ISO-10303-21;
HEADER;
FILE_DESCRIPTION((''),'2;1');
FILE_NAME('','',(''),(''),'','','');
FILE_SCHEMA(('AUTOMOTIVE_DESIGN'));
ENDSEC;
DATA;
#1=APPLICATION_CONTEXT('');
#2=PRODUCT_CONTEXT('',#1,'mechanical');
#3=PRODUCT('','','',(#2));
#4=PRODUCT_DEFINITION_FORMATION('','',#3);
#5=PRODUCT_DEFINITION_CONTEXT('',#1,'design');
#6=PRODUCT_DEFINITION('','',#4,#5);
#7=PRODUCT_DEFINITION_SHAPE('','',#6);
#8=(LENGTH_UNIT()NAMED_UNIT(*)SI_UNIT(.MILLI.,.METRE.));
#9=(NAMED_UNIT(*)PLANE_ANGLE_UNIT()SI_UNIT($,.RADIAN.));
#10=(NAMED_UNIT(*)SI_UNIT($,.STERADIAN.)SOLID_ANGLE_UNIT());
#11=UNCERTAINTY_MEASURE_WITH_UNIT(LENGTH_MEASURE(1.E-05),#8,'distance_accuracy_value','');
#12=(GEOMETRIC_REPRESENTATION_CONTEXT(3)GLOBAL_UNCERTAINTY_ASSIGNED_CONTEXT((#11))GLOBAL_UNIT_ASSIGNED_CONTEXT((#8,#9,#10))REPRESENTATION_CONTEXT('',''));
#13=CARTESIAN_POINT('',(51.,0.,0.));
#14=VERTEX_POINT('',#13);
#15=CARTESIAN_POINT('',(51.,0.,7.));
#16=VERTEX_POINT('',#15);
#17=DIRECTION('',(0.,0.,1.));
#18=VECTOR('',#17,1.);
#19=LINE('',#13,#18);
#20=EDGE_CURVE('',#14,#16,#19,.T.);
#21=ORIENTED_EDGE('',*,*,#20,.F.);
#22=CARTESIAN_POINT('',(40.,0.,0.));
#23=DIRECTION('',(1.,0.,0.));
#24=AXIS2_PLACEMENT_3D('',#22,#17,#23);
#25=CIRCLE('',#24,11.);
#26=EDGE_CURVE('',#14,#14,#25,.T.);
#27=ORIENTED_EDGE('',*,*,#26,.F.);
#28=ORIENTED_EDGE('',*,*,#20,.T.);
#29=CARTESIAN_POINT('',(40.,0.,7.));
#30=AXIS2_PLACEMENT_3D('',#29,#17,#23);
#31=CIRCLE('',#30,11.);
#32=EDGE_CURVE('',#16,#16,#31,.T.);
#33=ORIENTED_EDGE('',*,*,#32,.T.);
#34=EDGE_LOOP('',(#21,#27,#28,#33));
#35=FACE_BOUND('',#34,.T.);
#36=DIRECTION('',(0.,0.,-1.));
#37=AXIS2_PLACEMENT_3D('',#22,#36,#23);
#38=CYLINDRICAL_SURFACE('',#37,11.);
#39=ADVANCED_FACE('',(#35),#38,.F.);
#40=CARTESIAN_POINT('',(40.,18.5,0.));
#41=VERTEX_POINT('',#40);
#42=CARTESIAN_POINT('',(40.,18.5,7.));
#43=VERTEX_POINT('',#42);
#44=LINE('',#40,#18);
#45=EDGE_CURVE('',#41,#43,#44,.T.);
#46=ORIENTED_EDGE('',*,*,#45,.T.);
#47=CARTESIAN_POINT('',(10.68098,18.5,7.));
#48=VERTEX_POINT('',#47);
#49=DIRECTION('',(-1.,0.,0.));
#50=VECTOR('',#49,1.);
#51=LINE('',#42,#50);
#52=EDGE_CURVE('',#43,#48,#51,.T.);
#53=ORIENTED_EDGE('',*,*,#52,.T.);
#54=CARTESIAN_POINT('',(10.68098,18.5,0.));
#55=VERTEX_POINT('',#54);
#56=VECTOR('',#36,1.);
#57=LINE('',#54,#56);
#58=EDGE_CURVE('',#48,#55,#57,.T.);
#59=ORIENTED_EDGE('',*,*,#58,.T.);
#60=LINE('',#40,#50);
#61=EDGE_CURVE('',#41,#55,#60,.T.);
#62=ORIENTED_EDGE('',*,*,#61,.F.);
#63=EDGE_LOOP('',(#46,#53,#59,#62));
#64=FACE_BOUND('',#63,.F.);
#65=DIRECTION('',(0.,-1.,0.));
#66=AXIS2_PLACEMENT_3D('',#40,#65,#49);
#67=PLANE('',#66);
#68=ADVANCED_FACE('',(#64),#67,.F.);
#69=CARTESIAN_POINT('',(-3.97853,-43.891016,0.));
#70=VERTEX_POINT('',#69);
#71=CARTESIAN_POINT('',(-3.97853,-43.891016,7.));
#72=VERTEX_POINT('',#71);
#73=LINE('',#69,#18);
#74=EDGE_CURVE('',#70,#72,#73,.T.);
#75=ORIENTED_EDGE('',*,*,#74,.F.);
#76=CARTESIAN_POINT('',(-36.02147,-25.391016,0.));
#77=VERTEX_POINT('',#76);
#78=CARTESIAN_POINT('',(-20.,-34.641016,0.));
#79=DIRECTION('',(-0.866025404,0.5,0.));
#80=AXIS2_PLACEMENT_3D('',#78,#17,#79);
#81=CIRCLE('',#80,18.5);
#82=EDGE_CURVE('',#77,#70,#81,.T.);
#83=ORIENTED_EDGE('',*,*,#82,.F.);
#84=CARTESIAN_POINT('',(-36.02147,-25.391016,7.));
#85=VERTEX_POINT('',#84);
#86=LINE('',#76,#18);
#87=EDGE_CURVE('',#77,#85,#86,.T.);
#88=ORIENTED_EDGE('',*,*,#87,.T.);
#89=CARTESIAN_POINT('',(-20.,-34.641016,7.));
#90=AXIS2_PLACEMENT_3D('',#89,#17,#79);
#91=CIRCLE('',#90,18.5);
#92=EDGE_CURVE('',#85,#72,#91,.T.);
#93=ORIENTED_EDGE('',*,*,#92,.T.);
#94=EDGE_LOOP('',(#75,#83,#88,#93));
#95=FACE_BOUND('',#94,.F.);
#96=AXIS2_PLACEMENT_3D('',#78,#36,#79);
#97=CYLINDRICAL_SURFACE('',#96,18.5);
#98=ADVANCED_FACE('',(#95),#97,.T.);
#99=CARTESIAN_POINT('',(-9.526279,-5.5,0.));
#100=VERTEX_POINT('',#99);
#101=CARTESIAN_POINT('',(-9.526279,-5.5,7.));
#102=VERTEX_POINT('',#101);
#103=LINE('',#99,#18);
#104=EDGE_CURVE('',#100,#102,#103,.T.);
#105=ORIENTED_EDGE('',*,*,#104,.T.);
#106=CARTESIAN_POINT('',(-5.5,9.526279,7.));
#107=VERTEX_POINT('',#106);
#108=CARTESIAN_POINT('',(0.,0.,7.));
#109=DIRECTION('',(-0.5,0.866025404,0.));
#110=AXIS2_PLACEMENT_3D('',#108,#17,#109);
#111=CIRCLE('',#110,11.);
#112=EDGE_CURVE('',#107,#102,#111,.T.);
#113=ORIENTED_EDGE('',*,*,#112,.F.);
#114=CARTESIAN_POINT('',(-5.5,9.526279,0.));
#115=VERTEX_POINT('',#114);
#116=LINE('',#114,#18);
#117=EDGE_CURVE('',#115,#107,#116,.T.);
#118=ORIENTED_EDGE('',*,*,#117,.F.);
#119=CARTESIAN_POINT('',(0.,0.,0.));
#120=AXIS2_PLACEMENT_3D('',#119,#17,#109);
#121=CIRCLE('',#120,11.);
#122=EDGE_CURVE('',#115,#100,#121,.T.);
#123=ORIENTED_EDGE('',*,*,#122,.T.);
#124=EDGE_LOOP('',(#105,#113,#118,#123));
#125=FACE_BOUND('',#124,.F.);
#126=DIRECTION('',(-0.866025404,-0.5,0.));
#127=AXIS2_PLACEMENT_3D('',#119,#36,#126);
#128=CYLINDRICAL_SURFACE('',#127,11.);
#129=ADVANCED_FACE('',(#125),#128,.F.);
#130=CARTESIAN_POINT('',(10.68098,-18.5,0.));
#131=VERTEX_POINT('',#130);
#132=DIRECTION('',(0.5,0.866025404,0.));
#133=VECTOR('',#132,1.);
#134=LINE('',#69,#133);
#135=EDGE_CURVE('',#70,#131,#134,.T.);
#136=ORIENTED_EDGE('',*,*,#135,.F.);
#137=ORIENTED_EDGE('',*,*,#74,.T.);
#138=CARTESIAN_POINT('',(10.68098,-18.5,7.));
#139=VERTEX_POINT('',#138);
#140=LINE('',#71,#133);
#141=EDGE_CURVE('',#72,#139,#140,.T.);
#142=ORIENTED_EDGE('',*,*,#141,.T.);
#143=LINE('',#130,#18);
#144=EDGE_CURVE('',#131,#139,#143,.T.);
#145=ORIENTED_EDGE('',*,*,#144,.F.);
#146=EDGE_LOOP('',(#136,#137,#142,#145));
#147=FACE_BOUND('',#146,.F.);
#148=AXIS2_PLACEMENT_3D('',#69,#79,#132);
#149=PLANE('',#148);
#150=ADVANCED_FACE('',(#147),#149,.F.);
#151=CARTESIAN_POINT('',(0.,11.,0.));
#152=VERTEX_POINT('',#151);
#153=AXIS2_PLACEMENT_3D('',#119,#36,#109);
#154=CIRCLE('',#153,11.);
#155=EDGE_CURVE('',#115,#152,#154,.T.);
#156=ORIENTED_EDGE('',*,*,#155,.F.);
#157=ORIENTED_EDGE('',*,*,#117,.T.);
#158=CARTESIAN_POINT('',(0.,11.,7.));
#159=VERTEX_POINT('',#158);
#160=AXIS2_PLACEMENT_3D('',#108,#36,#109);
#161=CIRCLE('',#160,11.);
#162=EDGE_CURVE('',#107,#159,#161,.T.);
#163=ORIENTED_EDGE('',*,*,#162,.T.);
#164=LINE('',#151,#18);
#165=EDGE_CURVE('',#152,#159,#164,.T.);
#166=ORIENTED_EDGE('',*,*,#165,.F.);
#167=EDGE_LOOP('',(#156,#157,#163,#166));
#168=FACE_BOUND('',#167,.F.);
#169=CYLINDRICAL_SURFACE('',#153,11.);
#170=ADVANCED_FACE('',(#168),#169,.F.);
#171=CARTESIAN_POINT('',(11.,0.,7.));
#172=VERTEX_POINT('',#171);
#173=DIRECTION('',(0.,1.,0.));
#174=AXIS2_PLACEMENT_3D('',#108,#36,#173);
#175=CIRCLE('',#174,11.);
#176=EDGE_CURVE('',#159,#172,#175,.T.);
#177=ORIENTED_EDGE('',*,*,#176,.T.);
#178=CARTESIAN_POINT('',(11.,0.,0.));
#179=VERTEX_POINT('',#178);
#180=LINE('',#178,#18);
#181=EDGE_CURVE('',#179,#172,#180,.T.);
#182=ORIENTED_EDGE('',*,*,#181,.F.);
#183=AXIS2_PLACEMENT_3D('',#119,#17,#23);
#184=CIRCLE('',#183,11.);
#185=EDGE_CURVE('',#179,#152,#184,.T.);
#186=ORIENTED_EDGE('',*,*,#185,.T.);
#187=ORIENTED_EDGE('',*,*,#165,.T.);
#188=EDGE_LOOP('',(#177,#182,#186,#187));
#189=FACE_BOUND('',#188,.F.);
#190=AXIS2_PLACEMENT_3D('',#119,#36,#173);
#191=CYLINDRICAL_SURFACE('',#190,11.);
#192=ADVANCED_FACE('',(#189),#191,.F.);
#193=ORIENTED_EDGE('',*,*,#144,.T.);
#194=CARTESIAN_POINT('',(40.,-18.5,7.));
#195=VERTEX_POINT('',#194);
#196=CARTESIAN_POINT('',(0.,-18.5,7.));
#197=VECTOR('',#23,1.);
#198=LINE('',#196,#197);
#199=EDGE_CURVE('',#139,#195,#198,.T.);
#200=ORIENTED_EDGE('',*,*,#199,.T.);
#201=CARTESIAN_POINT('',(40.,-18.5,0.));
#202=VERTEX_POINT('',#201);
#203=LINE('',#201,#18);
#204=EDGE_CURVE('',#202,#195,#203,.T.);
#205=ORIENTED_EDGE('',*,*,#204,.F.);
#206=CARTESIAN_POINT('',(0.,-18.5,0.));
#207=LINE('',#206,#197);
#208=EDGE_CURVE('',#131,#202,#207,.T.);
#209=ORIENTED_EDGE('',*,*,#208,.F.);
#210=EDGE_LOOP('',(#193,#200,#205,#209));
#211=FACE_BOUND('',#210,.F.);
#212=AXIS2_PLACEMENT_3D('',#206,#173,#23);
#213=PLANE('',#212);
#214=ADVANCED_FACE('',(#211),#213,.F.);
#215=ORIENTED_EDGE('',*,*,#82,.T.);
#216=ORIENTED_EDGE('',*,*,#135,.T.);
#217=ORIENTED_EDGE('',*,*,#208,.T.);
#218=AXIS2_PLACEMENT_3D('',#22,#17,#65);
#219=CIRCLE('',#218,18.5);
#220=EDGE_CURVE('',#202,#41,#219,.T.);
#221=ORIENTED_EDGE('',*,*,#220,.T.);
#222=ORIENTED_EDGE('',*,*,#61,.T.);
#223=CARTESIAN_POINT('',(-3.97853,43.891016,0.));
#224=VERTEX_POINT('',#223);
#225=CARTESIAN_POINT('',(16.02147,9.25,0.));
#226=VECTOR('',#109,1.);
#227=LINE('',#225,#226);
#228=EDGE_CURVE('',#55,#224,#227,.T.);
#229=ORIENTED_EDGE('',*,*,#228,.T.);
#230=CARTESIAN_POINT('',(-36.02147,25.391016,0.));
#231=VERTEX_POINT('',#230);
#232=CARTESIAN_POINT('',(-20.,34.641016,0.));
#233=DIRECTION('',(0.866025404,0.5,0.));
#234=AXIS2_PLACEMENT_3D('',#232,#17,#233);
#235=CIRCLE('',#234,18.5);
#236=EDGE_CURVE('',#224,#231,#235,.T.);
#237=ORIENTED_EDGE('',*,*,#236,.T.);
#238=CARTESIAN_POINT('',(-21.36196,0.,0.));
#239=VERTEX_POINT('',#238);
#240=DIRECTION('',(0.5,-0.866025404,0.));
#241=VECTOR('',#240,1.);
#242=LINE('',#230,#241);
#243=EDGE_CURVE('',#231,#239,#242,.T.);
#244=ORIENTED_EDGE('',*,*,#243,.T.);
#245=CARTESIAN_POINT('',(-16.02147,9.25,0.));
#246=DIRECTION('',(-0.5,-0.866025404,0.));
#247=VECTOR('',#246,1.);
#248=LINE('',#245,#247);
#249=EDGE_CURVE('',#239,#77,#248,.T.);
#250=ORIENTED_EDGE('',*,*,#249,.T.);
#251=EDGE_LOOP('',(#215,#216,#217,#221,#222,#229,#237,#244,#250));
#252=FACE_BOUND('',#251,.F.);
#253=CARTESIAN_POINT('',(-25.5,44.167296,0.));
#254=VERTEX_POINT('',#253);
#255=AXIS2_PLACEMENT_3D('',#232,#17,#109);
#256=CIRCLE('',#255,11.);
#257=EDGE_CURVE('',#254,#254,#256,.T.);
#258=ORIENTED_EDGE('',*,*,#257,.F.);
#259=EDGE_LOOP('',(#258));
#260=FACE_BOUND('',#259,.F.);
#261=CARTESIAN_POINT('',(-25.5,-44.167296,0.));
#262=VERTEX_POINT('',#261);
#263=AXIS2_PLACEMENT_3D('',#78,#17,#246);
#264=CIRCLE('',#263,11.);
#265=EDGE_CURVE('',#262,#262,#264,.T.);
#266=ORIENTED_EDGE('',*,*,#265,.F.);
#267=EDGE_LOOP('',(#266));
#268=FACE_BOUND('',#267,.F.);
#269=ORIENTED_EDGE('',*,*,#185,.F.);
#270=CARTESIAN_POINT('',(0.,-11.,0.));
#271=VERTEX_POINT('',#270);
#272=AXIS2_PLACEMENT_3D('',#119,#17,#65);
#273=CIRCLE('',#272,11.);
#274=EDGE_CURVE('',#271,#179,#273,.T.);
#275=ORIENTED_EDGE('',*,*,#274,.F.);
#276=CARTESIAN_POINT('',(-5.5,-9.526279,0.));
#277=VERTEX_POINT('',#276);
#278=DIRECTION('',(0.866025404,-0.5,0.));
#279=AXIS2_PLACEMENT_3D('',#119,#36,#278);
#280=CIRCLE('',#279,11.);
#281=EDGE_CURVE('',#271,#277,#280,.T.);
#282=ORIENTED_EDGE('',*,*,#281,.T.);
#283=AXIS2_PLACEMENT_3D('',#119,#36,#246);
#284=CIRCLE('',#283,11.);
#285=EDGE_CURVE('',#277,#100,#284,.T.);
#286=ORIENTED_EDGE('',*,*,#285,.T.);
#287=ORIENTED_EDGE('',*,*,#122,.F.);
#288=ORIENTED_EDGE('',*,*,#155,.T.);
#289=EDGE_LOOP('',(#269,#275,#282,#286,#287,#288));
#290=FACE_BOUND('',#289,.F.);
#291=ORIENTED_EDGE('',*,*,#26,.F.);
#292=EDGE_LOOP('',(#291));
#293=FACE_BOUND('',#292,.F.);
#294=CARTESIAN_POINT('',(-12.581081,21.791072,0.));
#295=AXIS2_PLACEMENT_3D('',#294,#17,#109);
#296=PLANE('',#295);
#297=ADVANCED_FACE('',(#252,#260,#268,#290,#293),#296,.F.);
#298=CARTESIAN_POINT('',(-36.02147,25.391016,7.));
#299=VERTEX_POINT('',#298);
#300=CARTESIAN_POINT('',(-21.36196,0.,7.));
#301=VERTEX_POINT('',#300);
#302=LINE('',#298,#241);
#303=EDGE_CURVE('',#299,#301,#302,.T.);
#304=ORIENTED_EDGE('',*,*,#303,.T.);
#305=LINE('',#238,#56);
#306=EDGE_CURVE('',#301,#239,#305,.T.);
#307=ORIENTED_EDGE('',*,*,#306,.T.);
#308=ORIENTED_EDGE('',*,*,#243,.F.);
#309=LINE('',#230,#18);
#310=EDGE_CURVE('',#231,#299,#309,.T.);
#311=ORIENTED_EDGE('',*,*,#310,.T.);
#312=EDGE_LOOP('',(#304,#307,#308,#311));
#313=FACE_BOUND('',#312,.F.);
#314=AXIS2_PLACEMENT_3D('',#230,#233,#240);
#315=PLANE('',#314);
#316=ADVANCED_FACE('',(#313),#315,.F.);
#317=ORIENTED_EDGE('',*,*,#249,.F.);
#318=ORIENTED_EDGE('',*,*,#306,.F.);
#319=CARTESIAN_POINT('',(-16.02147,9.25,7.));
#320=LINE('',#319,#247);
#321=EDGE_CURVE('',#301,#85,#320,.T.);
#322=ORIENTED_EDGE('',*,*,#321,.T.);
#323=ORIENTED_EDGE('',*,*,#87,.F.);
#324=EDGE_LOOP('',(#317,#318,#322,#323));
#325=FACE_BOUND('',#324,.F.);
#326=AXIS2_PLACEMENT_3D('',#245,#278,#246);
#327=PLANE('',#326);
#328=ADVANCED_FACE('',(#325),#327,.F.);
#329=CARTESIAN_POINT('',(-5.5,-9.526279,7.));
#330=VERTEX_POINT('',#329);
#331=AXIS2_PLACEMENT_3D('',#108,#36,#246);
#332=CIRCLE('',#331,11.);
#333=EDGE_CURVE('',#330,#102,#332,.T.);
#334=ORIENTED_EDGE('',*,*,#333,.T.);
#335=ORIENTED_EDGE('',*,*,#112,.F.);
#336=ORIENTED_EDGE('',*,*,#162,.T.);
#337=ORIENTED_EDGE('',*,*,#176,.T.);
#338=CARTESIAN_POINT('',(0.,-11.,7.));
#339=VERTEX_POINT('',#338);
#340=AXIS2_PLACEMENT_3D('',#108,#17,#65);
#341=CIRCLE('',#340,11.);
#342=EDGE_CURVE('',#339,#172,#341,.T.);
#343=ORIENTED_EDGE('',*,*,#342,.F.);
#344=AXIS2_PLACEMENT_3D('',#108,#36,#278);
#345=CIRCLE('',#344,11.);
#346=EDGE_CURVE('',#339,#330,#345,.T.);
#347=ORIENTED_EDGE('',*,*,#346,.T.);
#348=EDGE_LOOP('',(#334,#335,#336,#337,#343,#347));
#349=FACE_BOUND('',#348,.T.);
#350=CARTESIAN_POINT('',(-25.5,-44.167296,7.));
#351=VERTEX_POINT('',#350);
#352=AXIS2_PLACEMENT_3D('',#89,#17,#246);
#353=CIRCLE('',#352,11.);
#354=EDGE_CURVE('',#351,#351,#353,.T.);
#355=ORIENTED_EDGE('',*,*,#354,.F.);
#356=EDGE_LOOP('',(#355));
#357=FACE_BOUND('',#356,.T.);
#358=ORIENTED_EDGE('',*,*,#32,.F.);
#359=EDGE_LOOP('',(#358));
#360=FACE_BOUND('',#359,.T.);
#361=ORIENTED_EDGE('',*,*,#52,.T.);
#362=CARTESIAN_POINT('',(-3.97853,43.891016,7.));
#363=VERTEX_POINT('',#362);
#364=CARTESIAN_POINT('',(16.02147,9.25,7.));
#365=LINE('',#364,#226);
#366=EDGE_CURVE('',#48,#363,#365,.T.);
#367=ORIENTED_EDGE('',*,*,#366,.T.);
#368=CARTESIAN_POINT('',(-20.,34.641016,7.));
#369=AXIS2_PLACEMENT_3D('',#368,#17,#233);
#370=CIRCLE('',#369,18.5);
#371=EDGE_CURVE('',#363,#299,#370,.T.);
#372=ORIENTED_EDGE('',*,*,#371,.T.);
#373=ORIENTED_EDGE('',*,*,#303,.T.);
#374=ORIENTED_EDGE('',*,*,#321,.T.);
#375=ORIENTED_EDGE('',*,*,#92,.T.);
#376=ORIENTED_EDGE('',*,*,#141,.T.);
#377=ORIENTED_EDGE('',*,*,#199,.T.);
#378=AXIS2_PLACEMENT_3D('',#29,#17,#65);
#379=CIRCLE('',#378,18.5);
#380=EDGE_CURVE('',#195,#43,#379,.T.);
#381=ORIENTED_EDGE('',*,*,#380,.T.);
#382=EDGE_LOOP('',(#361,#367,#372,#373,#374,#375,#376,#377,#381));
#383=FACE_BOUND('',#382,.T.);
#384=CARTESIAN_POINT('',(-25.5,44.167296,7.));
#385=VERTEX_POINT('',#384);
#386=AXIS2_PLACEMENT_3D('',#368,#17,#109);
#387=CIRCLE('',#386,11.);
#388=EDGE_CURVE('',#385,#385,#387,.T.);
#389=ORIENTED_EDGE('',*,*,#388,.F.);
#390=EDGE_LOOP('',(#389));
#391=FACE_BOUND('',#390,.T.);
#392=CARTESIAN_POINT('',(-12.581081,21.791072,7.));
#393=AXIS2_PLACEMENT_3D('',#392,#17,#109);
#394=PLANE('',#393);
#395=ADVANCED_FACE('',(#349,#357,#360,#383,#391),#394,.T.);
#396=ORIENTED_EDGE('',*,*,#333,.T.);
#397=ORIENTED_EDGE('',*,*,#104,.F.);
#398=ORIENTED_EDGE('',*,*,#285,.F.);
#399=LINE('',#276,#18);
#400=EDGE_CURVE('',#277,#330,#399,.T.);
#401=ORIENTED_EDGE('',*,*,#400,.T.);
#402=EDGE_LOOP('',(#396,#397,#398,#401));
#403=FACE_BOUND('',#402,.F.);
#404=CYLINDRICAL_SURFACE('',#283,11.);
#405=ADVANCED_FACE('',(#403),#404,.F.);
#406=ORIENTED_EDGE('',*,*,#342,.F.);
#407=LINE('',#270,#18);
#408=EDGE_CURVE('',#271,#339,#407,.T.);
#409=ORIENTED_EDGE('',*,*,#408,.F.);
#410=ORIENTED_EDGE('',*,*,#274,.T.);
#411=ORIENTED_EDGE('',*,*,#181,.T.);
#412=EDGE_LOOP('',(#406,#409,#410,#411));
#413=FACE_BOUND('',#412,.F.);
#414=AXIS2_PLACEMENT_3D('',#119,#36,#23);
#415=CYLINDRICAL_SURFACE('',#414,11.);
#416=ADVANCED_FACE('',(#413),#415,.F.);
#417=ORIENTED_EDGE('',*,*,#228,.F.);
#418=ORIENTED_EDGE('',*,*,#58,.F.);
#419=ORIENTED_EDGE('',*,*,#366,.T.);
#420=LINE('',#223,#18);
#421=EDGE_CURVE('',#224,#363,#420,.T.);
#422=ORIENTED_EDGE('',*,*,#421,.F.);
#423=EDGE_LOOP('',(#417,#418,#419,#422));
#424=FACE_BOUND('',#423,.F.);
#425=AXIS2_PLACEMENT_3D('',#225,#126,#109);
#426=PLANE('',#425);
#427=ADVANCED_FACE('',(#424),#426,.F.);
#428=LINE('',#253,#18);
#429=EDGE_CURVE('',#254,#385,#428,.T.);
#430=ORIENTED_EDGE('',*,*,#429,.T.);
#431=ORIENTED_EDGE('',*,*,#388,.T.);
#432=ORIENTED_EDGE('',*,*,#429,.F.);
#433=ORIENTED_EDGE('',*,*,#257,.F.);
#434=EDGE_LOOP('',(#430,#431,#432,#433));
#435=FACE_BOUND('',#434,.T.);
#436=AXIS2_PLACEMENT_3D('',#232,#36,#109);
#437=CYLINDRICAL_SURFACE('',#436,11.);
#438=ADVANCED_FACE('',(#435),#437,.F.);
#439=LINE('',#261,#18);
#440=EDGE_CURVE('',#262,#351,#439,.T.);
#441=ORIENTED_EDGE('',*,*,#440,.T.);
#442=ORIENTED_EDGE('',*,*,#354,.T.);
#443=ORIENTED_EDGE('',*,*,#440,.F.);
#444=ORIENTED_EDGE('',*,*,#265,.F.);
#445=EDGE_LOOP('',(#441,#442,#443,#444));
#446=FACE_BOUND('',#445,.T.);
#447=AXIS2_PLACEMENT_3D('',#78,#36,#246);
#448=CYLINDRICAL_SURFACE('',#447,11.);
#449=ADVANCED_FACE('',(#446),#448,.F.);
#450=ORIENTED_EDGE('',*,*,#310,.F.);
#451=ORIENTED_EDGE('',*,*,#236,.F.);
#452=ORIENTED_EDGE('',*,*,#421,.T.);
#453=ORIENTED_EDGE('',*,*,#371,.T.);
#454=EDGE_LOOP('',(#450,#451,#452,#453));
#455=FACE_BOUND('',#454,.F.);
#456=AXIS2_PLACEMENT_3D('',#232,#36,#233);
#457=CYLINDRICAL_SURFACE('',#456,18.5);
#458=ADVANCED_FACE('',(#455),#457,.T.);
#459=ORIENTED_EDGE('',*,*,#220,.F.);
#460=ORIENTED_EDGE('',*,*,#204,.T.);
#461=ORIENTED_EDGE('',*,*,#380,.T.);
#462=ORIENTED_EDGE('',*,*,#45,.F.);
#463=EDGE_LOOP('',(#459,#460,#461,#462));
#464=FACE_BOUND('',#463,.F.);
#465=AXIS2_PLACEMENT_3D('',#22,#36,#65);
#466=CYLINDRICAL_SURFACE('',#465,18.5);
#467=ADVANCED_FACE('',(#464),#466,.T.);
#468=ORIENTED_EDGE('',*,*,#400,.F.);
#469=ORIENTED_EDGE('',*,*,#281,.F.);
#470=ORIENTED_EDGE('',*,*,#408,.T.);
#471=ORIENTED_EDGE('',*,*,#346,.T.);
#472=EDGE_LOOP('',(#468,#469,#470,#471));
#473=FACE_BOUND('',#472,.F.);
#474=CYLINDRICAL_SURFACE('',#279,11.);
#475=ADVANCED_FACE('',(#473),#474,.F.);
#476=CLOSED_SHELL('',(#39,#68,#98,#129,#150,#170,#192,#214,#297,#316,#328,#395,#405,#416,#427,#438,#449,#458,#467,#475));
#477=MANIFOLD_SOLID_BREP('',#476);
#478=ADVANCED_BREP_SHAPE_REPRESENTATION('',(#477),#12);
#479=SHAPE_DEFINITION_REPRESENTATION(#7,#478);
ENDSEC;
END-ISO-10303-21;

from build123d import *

# Parameters (mm, degrees)
F0_R            = 11
F1_DEPTH        = 7
F1_COPIES_COUNT = 3


# Not quite as in the source:
# - a pattern or mirror of a feature is missing from the dataset's text; its kind, count and spacing are read off the source's solid


with BuildPart() as f1:
    # F0 (on Top) → F1 (new body)
    with BuildSketch(Plane.XY):
        with BuildLine():
            ThreePointArc((0, 11), (7.7781745931, 7.7781745931), (11, 0))
            ThreePointArc((11, 0), (7.7781745931, -7.7781745931), (0, -11))
            Line((0, -11), (0, -18.5))
            Line((0, -18.5), (40, -18.5))
            ThreePointArc((40, -18.5), (58.5, 0), (40, 18.5))
            Line((40, 18.5), (0, 18.5))
            Line((0, 18.5), (0, 11))
        make_face()
        with Locations((40, 0)):
            Circle(F0_R, mode=Mode.SUBTRACT)
    extrude(amount=F1_DEPTH)

    # F1_copies: F1 ×3 about axis
    f1_copies_axis = Axis((0, 0, 0), (0, 0, 1))


with BuildPart() as f1_1:
    add(f1.part)
    for i in range(1, F1_COPIES_COUNT):
        add(f1.part.rotate(f1_copies_axis, i * 360 / F1_COPIES_COUNT))


solid = f1_1.part
